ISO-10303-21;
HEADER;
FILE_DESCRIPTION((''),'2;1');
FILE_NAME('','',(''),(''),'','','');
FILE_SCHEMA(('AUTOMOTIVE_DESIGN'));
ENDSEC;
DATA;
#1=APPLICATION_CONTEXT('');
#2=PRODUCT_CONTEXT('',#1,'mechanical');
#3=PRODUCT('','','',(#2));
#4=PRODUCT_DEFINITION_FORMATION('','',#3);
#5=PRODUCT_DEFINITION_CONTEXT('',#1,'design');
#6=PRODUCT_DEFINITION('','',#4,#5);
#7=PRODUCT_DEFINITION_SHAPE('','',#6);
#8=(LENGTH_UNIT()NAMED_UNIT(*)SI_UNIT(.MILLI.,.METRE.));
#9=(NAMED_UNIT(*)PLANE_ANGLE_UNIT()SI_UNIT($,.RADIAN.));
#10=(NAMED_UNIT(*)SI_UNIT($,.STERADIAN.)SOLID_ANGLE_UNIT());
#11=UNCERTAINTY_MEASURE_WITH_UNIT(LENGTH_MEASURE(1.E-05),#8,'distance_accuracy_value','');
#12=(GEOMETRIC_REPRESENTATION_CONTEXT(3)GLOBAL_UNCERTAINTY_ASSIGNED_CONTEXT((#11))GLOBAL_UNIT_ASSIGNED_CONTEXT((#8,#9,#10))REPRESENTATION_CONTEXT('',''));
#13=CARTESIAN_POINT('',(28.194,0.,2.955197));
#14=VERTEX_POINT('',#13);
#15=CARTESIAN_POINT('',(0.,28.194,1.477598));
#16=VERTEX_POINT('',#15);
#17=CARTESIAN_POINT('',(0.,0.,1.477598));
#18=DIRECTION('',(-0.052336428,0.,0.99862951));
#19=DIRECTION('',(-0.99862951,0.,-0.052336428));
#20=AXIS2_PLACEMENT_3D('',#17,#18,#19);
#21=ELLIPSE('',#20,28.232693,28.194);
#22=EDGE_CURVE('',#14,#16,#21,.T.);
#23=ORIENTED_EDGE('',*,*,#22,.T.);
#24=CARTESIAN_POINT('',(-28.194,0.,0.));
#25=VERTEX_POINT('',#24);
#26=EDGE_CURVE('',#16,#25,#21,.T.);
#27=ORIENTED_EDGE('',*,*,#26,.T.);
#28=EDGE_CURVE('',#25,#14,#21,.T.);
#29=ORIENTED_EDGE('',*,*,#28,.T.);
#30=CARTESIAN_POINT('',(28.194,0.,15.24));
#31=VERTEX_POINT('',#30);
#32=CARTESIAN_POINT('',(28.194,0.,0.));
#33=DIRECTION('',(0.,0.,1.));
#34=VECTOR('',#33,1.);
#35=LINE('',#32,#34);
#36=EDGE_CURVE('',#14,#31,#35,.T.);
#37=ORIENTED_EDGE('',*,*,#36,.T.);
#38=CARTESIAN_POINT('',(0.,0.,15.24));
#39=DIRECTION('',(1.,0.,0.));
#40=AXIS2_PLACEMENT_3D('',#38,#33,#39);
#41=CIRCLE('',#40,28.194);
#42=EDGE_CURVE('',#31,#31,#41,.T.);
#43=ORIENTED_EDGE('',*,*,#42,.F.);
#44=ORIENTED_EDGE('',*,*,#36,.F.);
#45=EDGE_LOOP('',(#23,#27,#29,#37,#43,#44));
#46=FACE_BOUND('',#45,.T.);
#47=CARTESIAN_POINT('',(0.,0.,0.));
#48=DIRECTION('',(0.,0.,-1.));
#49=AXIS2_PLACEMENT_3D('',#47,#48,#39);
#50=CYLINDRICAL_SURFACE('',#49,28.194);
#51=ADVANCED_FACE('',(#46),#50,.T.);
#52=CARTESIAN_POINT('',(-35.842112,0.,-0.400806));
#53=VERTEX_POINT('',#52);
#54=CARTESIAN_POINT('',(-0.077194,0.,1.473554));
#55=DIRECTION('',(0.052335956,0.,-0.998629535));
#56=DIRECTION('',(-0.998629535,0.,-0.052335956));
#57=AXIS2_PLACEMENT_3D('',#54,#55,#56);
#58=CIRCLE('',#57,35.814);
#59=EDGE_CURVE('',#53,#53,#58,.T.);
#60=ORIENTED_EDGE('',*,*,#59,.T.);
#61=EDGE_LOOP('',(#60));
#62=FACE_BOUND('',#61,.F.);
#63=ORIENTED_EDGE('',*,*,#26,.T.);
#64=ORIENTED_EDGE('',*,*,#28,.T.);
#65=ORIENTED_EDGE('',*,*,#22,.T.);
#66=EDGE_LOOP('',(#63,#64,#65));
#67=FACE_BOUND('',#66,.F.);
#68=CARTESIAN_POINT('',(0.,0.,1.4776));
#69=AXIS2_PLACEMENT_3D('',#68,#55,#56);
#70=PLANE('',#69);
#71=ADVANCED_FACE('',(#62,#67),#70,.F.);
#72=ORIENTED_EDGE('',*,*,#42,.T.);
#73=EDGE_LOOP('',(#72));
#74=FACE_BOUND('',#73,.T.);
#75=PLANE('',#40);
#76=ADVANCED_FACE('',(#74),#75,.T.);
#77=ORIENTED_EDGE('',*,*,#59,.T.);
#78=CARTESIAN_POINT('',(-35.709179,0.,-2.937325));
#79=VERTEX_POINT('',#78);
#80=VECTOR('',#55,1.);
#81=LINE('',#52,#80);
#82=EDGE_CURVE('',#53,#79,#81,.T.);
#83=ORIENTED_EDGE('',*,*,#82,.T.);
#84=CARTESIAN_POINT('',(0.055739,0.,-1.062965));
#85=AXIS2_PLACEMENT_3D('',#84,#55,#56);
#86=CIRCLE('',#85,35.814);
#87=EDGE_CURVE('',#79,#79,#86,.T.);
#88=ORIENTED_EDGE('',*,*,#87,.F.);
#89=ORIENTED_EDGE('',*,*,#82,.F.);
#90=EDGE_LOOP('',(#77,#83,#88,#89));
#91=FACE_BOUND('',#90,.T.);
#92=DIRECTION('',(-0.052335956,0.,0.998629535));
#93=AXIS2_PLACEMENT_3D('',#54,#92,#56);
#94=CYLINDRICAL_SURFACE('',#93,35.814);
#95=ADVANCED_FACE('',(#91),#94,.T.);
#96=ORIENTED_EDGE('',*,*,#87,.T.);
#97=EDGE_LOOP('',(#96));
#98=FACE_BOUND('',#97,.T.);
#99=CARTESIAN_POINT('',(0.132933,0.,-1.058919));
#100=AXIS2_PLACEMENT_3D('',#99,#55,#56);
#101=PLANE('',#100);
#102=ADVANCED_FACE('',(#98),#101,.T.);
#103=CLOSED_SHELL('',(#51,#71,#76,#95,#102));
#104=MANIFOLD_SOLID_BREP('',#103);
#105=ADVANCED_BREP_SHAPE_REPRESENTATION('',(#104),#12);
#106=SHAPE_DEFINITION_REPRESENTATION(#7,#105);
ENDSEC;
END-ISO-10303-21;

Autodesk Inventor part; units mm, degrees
ref_plane "YZ Plane" through (0, 0, 0) normal (1, 0, 0) x (0, 1, 0)
ref_plane "XZ Plane" through (0, 0, 0) normal (0, 1, 0) x (-1, 0, 0)
ref_plane "XY Plane" through (0, 0, 0) normal (0, 0, 1) x (1, 0, 0)
sketch "Sketch1" plane through (0, 0, 0) normal (0, 0, 1) x (1, 0, 0)
  circle A0 centre (0, 0) radius 28.194
  dimension "d0" = 56.388
extrude "Extrusion1" add sketch "Sketch1" along normal blind 15.24
sketch "Sketch2" plane through (0, 0, 15.24) normal (0, 0, 1) x (1, 0, 0)
  circle A0 centre (0, 0) radius 28.194 projected
  line L0 (0, 28.194) -> (19.1738, 28.194) construction
ref_plane "Work Plane1" through (0, 28.194, 15.24) normal (0, -1, 0) x (1, 0, 0)
sketch "Sketch3" plane through (0, 28.194, 15.24) normal (0, -1, 0) x (1, 0, 0)
  line L0 (-28.194, -15.24) -> (28.194, -15.24) projected
  line L1 (-28.194, -15.24) -> (37.5113, -11.7965)
  line L2 (-28.194, -15.24) -> (37.6014, -15.24) construction
  line L3 (37.5113, -11.7965) -> (37.5113, -25.6929)
  line L4 (37.5113, -25.6929) -> (-28.194, -15.24)
  point P0 (0, -15.24)
  dimension "d3" = 3
extrude "Extrusion2" cut sketch "Sketch3" along normal blind 152.4
sketch "Sketch4" plane through (0, 0, 1.4776) normal (0.052336, 0, -0.9986295) x (-0.9986295, 0, -0.052336)
  circle A0 centre (0.0773, 0) radius 35.814
  dimension "d6" = 71.628
extrude "Extrusion3" add sketch "Sketch4" along normal blind 2.54
properties part number "coilpiece2"
